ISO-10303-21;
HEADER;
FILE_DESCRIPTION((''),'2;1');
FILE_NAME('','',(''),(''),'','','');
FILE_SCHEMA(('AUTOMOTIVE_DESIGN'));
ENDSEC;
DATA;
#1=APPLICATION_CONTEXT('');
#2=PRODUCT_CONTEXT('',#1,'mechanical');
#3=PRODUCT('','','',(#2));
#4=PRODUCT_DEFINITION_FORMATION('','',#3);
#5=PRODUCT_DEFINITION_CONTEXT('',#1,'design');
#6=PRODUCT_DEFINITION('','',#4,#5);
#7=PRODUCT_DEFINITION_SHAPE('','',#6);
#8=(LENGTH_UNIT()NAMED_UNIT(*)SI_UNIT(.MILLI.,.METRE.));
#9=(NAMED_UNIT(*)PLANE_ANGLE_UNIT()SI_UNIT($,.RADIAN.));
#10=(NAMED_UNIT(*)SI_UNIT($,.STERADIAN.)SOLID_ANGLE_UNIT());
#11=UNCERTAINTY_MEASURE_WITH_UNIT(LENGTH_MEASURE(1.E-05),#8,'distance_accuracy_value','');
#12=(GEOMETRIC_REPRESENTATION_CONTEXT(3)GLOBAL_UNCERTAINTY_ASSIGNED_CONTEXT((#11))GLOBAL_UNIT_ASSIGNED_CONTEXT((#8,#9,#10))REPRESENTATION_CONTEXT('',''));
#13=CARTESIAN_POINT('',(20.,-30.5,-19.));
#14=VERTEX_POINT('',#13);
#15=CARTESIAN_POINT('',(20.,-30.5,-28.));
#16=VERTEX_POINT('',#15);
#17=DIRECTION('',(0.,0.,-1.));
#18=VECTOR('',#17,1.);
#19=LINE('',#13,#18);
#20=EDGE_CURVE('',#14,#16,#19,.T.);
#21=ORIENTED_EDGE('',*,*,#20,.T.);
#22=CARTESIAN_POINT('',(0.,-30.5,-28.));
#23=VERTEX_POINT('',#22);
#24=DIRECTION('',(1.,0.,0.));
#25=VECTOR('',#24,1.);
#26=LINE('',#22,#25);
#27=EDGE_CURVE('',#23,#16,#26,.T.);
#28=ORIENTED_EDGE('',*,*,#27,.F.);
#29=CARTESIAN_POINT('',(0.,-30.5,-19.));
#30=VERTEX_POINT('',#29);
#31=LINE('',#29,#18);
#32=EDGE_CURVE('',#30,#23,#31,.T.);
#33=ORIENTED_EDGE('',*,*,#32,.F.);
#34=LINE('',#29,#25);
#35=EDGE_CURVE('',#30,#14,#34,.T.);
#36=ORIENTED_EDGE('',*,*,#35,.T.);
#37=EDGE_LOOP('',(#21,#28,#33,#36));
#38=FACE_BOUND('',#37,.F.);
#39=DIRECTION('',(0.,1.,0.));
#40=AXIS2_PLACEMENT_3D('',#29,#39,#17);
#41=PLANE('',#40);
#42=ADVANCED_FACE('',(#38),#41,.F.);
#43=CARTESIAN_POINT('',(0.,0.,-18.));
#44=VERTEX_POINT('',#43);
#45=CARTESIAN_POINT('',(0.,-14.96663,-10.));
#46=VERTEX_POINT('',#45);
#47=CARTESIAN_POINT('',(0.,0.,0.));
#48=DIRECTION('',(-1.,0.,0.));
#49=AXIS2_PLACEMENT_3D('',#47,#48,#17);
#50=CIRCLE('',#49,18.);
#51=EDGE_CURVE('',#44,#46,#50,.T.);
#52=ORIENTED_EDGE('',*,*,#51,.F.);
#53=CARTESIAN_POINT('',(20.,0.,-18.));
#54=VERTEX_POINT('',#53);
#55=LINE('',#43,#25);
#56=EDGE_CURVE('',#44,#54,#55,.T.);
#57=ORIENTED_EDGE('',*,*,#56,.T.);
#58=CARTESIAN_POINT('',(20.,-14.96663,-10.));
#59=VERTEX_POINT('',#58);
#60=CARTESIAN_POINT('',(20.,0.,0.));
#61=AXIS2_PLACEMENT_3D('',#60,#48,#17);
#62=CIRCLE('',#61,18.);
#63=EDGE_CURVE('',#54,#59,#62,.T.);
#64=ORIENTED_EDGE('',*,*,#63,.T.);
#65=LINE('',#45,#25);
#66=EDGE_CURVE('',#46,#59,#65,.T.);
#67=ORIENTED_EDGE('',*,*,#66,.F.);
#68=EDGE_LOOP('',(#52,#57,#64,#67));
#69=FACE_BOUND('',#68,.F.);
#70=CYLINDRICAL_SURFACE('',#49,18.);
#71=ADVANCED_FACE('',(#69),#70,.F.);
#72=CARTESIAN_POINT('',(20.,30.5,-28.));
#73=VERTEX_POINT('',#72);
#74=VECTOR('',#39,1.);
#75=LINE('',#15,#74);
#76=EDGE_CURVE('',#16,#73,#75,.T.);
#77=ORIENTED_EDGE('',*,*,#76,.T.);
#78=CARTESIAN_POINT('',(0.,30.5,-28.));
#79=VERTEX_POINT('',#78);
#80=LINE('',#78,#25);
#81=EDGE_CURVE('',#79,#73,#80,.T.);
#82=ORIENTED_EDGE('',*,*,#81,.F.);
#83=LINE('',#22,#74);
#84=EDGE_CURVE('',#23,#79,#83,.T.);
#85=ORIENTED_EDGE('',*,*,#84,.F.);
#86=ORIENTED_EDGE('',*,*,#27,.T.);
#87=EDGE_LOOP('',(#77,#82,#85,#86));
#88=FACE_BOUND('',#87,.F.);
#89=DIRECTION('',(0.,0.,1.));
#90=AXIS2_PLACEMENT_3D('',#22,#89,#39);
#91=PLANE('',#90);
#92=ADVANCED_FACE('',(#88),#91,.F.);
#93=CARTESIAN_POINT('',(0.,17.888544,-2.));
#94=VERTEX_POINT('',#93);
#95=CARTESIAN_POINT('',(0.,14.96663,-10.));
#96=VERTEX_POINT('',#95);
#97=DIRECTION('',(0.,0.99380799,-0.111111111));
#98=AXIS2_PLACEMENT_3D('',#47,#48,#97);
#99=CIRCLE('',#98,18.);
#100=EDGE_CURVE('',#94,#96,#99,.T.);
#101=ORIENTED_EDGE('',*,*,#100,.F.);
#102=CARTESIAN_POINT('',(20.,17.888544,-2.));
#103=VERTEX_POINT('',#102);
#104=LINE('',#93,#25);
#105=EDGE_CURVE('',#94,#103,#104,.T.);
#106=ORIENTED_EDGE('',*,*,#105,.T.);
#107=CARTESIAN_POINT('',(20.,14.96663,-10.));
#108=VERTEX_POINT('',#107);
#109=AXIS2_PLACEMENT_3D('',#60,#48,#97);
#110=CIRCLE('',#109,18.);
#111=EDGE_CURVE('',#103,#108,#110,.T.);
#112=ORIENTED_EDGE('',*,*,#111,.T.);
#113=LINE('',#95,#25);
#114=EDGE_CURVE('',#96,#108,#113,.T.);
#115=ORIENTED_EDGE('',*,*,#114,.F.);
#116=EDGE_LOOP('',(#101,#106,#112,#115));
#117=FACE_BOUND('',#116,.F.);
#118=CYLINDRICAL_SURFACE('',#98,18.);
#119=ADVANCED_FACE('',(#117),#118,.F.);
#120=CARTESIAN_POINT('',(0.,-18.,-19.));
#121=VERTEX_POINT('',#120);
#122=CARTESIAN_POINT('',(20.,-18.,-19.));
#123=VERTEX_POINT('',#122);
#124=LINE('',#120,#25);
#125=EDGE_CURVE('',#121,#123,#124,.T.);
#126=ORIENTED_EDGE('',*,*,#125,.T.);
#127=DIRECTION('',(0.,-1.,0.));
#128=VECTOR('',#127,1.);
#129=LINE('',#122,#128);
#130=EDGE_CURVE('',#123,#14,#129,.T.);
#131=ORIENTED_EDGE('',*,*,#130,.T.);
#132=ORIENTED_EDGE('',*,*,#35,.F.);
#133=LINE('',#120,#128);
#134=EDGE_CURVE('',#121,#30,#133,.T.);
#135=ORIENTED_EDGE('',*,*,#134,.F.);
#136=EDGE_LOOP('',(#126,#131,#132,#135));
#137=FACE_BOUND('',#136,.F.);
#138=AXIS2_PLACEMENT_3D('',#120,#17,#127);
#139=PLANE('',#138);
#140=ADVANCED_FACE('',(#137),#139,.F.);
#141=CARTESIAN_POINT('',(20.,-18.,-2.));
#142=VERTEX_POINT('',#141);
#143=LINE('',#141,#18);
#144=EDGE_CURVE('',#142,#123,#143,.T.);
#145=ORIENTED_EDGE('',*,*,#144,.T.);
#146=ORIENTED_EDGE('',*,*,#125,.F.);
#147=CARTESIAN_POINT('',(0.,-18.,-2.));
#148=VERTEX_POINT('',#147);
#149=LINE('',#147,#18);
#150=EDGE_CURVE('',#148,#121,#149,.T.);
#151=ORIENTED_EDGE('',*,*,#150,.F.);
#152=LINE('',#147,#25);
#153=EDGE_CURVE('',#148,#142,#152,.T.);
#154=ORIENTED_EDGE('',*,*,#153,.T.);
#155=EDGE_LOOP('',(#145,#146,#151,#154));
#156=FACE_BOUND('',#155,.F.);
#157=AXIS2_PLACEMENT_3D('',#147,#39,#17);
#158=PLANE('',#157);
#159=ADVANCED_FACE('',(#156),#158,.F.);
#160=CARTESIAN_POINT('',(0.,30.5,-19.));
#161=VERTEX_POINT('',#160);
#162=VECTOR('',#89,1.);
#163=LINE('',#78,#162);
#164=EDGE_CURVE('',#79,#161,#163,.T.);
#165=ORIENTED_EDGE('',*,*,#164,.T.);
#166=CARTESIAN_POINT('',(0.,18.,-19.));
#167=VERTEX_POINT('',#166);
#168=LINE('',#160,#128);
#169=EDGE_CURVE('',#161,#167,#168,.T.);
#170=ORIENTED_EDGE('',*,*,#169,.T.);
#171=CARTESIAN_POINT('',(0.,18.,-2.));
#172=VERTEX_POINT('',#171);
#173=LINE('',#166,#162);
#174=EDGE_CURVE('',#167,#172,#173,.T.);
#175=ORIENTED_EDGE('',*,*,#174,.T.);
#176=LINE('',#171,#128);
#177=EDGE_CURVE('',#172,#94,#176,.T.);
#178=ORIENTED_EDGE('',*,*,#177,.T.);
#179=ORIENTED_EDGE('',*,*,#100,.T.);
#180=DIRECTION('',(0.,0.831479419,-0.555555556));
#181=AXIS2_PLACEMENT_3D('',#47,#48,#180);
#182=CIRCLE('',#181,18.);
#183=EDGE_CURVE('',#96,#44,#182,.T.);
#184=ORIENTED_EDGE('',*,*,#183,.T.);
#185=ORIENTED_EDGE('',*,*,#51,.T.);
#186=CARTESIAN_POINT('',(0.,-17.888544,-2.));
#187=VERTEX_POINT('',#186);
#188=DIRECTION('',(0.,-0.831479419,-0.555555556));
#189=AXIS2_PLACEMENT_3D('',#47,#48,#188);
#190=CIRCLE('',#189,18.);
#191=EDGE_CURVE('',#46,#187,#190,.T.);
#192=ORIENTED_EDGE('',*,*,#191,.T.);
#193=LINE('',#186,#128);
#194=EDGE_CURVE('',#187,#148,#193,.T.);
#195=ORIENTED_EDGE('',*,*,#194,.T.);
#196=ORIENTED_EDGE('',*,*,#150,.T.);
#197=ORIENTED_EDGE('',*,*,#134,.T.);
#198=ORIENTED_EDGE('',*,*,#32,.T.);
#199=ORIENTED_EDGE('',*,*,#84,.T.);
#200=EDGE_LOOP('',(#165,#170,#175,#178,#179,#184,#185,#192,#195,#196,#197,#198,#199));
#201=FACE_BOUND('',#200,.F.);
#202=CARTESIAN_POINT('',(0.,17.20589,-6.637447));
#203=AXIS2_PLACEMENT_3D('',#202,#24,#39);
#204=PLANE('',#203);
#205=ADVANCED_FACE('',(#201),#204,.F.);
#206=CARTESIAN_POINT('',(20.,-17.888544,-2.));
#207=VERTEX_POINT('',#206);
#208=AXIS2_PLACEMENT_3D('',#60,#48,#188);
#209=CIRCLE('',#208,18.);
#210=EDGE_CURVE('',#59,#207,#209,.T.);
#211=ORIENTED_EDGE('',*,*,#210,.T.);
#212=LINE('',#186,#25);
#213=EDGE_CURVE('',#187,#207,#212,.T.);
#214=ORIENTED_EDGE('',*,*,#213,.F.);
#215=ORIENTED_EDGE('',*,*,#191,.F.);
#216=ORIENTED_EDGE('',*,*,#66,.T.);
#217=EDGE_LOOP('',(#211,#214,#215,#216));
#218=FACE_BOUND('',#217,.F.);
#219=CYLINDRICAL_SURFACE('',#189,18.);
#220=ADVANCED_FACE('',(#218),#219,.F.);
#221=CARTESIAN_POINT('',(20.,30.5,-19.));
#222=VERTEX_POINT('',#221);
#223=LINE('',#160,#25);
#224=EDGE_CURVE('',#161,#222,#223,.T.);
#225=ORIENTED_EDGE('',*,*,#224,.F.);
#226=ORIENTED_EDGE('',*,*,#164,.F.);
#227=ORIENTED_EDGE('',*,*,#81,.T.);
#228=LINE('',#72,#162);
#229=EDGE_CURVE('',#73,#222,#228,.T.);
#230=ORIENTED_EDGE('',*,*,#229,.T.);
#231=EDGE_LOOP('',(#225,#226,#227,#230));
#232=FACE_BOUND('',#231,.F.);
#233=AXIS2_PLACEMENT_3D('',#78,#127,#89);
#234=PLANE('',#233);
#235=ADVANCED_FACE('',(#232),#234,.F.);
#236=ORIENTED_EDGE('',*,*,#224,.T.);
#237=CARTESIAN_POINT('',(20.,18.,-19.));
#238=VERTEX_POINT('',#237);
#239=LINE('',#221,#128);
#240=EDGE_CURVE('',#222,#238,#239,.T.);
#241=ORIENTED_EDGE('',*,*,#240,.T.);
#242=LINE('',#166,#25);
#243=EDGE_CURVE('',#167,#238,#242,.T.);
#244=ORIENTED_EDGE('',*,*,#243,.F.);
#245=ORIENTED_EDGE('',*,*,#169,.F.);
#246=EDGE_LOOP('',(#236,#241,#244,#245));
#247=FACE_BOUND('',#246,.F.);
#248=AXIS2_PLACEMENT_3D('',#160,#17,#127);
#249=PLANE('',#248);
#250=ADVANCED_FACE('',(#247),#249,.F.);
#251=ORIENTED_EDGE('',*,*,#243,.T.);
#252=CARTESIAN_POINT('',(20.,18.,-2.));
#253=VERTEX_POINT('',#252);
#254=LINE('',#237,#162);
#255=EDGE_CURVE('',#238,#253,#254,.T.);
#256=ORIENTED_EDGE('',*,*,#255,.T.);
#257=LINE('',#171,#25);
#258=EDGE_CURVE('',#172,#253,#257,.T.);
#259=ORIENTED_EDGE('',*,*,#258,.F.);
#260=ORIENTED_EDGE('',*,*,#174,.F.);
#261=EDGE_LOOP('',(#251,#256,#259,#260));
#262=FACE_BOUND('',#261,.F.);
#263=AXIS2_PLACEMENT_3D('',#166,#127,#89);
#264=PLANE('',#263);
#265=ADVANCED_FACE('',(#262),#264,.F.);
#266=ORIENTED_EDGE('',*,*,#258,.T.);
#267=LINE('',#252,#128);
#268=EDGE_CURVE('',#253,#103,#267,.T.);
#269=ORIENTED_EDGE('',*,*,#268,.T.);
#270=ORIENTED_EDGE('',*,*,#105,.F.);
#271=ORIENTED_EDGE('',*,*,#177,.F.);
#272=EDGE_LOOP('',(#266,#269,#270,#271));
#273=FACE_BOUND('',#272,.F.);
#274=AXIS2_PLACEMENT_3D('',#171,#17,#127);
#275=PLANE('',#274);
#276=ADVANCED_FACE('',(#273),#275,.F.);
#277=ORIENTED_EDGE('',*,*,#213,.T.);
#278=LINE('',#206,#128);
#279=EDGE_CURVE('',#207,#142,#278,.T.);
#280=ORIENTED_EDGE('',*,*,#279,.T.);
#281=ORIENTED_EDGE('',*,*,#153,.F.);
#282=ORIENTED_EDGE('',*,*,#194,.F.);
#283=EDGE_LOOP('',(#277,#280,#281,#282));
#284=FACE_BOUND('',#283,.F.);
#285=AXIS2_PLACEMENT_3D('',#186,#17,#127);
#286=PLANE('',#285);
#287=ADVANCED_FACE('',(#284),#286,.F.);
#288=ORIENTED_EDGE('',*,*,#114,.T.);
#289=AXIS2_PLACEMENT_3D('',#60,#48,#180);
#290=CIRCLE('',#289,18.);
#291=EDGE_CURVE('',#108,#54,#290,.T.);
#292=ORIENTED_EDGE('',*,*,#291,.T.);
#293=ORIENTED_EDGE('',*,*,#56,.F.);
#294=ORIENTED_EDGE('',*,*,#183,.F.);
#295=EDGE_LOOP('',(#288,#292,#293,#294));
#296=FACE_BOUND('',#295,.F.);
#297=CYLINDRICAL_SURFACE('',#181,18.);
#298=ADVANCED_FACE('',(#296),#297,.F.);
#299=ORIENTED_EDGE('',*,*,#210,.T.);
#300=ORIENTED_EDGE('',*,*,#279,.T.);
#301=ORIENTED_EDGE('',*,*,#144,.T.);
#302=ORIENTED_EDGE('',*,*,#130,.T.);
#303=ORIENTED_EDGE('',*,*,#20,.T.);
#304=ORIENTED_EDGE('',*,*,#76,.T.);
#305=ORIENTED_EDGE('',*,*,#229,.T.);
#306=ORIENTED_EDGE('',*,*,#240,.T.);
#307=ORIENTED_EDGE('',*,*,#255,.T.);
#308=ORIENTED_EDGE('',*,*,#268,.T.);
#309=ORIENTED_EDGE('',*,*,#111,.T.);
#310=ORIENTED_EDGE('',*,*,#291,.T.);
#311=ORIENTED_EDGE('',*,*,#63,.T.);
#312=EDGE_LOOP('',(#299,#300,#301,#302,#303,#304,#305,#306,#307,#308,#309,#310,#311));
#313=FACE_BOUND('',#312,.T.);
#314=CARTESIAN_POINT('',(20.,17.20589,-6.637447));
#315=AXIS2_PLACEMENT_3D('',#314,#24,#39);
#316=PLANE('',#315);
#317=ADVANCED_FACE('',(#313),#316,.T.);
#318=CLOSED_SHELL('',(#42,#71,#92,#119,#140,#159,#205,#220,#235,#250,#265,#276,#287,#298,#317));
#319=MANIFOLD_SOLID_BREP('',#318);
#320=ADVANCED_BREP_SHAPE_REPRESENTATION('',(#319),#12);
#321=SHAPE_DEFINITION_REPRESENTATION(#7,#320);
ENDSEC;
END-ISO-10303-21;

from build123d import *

# Parameters (mm, degrees)
F1_DEPTH = 20


with BuildPart() as f1:
    # F0 (on Right) → F1 (new body)
    with BuildSketch(Plane.YZ):
        with BuildLine():
            Line((18, -2), (17.88854382, -2))
            ThreePointArc((17.88854382, -2), (16.9075605646, -6.1753053167), (14.9666295471, -10))
            Line((14.9666295471, -10), (18, -10))
            Line((18, -10), (18, -2))
        make_face()
        with BuildLine():
            Line((18, -10), (14.9666295471, -10))
            ThreePointArc((14.9666295471, -10), (8.4852813742, -15.8745078664), (0, -18))
            Line((0, -18), (14.3178210633, -18))
            ThreePointArc((14.3178210633, -18), (16.2634559673, -16.2634559673), (18, -14.3178210633))
            Line((18, -14.3178210633), (18, -10))
        make_face()
        with BuildLine():
            Line((-14.3178210633, -18), (0, -18))
            ThreePointArc((0, -18), (-8.4852813742, -15.8745078664), (-14.9666295471, -10))
            Line((-14.9666295471, -10), (-18, -10))
            Line((-18, -10), (-18, -14.3178210633))
            ThreePointArc((-18, -14.3178210633), (-16.2634559673, -16.2634559673), (-14.3178210633, -18))
        make_face()
        with BuildLine():
            Line((14.3178210633, -18), (0, -18))
            Line((0, -18), (-14.3178210633, -18))
            ThreePointArc((-14.3178210633, -18), (0, -23), (14.3178210633, -18))
        make_face()
        with BuildLine():
            ThreePointArc((-14.9666295471, -10), (-16.9075605646, -6.1753053167), (-17.88854382, -2))
            Line((-17.88854382, -2), (-18, -2))
            Line((-18, -2), (-18, -10))
            Line((-18, -10), (-14.9666295471, -10))
        make_face()
        with BuildLine():
            Line((18, -18), (14.3178210633, -18))
            ThreePointArc((14.3178210633, -18), (0, -23), (-14.3178210633, -18))
            Line((-14.3178210633, -18), (-17, -18))
            Line((-17, -18), (-18, -18))
            Line((-18, -18), (-18, -19))
            Line((-18, -19), (-30.5, -19))
            Line((-30.5, -19), (-30.5, -28))
            Line((-30.5, -28), (30.5, -28))
            Line((30.5, -28), (30.5, -19))
            Line((30.5, -19), (18, -19))
            Line((18, -19), (18, -18))
        make_face()
        with BuildLine():
            ThreePointArc((18, -14.3178210633), (16.2634559673, -16.2634559673), (14.3178210633, -18))
            Line((14.3178210633, -18), (18, -18))
            Line((18, -18), (18, -14.3178210633))
        make_face()
        with BuildLine():
            Line((-17, -18), (-14.3178210633, -18))
            ThreePointArc((-14.3178210633, -18), (-16.2634559673, -16.2634559673), (-18, -14.3178210633))
            Line((-18, -14.3178210633), (-18, -18))
            Line((-18, -18), (-17, -18))
        make_face()
    extrude(amount=F1_DEPTH)


solid = f1.part
